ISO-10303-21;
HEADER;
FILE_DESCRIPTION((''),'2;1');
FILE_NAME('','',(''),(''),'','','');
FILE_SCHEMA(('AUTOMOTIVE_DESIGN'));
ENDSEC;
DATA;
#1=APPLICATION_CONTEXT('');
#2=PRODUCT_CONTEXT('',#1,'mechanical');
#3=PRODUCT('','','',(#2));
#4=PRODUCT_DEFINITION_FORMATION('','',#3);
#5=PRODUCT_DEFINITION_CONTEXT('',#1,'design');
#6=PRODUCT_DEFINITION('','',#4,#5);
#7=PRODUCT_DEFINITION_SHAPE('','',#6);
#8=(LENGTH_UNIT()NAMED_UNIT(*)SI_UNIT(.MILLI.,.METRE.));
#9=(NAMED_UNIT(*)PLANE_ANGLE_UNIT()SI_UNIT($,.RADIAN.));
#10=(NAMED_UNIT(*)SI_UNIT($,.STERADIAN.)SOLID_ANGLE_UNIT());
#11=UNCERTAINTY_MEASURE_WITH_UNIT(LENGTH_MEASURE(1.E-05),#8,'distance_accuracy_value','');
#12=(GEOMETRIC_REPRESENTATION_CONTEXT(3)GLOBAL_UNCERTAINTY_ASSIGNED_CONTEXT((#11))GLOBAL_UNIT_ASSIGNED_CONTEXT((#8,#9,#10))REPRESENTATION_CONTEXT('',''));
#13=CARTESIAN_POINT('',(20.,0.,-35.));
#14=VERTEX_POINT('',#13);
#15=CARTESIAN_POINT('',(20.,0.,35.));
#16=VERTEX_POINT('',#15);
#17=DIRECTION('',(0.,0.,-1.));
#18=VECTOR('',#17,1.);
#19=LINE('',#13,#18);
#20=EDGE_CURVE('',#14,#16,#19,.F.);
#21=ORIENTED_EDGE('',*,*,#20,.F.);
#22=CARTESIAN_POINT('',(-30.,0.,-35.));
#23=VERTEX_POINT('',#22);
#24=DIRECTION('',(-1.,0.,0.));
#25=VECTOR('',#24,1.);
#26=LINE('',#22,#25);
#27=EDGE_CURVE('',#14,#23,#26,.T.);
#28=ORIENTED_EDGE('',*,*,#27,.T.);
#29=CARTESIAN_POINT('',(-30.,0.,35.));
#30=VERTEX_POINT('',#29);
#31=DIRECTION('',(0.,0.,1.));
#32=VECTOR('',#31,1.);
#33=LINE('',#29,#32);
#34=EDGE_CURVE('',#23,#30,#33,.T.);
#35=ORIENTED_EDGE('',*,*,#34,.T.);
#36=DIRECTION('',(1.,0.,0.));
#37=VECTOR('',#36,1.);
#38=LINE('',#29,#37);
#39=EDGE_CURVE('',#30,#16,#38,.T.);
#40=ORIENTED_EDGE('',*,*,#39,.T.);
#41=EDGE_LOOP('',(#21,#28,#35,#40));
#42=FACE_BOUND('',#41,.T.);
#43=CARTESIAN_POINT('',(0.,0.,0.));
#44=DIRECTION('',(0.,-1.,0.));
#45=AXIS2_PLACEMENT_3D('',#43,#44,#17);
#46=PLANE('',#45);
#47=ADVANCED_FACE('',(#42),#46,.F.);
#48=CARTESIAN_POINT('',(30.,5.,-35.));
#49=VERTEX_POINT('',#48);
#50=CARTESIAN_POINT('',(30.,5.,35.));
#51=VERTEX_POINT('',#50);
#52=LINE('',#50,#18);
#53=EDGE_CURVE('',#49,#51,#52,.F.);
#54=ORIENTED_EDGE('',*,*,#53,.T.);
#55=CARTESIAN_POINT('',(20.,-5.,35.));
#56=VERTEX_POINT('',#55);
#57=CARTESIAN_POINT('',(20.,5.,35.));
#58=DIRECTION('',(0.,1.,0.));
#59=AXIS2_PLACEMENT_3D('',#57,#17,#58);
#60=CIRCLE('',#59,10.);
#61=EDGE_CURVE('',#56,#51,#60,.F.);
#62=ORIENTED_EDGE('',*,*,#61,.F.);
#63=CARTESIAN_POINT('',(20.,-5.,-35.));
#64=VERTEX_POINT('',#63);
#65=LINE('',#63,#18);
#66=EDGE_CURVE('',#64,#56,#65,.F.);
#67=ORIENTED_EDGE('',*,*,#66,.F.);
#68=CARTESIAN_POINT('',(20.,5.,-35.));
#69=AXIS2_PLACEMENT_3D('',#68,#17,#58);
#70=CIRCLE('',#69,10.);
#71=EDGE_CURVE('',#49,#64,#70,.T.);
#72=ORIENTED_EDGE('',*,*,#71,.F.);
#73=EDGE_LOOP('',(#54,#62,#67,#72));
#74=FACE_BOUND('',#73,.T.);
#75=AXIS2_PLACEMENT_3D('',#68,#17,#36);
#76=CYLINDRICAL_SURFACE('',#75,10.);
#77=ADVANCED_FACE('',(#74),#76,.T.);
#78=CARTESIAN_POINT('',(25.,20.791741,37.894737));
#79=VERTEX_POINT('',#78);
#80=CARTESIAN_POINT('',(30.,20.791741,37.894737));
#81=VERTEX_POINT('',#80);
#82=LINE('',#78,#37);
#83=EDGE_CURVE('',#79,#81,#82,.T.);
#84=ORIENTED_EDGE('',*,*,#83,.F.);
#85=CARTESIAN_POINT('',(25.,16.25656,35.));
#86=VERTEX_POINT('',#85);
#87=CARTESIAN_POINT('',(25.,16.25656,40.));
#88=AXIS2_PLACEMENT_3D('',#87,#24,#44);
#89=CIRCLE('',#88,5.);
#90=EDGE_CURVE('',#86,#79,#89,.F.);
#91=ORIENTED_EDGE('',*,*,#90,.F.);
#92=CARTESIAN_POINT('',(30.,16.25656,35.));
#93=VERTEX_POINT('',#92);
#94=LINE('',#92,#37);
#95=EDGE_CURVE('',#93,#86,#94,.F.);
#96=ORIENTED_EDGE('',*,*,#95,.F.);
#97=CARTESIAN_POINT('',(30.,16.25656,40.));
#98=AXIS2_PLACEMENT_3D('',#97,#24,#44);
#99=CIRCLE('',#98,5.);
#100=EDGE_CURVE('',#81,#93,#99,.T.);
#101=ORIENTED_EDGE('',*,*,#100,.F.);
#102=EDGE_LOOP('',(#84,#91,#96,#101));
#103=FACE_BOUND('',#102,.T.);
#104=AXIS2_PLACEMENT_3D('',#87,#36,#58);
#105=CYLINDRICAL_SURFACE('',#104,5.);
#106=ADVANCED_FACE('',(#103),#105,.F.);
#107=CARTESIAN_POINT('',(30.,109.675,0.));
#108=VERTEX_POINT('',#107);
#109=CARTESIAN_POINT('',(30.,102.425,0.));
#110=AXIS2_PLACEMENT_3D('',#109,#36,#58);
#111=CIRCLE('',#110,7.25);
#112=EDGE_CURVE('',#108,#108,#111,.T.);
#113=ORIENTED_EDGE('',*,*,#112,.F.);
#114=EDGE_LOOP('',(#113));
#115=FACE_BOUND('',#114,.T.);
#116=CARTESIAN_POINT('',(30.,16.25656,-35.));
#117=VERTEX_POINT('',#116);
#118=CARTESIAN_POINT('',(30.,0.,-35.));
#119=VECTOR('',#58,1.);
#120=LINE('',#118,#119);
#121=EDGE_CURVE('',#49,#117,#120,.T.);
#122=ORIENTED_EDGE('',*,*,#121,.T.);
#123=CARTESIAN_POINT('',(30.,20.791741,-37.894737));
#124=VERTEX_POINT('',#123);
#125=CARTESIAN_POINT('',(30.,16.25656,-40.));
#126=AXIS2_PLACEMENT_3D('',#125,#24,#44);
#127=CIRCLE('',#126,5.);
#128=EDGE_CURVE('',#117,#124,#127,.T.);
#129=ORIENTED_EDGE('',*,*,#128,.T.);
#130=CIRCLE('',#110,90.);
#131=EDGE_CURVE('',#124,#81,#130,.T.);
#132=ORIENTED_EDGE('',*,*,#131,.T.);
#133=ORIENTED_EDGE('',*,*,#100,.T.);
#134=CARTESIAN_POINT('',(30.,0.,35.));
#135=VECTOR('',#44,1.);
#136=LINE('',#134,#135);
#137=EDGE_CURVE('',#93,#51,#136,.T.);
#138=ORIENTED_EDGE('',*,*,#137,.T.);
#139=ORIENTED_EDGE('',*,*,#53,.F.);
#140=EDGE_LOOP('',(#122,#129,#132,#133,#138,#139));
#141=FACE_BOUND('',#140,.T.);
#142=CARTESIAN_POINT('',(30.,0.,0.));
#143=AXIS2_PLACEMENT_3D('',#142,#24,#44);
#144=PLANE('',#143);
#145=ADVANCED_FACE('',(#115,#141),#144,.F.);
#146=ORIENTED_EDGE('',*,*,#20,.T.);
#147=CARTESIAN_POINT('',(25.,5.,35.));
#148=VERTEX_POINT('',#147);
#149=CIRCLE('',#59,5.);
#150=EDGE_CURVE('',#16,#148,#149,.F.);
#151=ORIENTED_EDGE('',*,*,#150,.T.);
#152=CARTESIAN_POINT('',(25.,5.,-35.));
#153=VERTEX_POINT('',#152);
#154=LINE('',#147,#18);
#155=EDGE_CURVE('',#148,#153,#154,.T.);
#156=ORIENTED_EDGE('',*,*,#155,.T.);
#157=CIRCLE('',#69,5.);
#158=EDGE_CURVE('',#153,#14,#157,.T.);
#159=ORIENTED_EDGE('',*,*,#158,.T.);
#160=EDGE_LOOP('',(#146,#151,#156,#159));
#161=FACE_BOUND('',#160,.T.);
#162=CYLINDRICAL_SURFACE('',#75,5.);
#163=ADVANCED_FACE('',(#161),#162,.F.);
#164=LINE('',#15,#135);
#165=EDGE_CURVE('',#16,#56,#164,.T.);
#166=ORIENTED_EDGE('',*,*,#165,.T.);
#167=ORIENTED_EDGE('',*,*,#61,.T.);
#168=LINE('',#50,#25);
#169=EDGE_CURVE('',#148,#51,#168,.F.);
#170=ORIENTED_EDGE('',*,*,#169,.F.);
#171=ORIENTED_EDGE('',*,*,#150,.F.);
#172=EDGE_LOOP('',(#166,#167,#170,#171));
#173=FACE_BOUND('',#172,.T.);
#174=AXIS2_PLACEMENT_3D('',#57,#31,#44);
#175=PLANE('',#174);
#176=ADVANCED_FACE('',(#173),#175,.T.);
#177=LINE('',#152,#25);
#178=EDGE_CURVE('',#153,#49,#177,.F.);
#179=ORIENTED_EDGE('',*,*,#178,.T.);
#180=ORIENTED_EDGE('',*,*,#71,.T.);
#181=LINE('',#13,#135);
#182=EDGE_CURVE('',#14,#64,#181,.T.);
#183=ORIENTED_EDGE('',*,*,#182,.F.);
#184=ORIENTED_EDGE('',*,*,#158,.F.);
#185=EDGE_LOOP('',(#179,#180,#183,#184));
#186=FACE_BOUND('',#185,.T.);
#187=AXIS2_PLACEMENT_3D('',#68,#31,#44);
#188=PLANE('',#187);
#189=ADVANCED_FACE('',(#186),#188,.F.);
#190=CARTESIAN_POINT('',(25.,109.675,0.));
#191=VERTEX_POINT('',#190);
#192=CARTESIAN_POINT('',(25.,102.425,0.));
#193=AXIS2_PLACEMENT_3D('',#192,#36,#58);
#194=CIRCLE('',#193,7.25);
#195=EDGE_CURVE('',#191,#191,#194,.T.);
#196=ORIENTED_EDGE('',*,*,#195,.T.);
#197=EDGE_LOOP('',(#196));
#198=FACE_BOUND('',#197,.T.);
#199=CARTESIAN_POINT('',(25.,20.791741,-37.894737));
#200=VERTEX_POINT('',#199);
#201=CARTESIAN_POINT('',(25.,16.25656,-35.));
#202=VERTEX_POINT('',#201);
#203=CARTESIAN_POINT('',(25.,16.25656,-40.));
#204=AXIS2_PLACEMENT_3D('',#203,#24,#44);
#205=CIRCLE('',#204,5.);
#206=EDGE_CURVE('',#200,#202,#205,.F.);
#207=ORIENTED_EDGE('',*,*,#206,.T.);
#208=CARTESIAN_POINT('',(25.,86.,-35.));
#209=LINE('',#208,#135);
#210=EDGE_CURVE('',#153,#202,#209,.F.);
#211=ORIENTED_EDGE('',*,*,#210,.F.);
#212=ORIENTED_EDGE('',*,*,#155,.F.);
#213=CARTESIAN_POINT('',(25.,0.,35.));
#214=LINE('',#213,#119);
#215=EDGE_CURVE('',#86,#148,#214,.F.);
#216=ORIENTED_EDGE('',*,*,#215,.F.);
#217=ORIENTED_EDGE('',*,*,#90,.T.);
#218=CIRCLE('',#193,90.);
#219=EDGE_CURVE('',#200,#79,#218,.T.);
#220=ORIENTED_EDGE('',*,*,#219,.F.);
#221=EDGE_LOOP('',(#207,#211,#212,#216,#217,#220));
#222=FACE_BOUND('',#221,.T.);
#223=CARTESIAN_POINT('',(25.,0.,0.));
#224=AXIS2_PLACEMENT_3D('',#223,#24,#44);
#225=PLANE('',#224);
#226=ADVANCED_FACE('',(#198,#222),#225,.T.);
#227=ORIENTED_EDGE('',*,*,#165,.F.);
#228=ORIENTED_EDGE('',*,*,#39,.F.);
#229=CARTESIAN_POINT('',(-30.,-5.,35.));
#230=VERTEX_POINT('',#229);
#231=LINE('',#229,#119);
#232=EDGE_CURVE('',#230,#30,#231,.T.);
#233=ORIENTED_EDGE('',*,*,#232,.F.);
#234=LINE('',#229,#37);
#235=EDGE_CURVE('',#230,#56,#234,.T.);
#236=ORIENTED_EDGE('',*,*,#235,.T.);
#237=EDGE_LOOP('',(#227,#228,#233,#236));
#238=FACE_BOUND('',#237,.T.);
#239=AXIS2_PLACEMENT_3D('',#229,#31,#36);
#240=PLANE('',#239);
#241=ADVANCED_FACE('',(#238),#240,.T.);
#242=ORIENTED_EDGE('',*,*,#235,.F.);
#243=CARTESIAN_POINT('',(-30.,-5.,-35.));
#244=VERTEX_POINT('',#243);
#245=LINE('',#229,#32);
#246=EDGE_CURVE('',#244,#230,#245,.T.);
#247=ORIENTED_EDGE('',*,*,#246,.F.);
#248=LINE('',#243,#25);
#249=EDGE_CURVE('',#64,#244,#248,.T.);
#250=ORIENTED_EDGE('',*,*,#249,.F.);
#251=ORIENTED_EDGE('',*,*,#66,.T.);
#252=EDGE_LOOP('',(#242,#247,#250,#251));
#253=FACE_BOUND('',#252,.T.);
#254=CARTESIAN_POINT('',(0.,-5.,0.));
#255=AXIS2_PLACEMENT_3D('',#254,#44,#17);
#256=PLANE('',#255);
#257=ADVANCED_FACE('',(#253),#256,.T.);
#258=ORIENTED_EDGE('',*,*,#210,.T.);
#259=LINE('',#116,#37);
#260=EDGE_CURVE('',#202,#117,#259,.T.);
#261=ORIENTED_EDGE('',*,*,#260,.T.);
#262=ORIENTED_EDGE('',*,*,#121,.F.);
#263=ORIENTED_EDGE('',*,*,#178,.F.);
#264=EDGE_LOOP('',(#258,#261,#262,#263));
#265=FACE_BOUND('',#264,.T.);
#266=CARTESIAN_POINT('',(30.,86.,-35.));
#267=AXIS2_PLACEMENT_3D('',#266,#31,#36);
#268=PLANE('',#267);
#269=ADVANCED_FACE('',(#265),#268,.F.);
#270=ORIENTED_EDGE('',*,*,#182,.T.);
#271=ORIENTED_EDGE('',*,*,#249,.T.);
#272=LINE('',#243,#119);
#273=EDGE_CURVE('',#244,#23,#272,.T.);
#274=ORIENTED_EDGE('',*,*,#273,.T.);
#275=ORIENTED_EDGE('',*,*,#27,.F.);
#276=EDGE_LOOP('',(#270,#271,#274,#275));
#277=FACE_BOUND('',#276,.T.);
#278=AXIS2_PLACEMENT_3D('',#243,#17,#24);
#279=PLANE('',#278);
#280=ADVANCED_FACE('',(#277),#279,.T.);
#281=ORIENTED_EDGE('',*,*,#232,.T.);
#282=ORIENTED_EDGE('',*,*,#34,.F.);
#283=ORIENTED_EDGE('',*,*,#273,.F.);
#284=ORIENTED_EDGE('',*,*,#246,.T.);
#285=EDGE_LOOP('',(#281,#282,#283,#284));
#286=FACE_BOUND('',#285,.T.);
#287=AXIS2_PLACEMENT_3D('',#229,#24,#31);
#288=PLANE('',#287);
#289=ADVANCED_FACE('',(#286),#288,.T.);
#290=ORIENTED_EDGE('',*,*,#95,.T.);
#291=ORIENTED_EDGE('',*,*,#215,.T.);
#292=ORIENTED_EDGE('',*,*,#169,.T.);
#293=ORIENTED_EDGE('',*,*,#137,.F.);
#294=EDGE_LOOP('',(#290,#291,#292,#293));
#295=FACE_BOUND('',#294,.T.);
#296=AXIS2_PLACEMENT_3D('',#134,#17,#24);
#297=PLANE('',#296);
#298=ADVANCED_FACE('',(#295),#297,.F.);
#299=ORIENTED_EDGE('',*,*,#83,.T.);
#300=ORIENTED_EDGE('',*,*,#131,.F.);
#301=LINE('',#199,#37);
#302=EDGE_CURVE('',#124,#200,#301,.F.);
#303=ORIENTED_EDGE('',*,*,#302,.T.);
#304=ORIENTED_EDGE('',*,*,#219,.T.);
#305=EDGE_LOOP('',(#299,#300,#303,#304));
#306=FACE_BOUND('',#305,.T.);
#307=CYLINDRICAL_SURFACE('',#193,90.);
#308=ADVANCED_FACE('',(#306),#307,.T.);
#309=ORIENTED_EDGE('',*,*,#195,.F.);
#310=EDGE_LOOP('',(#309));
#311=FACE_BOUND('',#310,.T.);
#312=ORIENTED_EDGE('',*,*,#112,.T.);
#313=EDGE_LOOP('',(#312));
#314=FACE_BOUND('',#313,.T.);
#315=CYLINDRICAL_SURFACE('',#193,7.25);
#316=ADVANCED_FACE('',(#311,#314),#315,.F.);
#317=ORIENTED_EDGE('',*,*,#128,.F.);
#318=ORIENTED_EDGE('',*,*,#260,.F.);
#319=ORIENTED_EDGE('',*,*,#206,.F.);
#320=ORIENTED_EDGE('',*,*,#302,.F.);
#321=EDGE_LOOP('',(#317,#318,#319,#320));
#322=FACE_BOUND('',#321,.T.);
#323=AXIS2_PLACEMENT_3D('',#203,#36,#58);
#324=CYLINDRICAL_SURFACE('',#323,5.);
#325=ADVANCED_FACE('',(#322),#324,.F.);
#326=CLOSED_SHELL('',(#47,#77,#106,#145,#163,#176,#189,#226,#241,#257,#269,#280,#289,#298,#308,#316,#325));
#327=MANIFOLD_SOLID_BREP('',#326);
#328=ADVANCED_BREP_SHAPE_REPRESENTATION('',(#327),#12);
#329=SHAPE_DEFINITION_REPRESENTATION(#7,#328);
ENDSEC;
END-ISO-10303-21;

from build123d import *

# Parameters (mm, degrees)
ESBO_O1_W                      = 60
ESBO_O1_H                      = 70
FLANGE_BASE1_DEPTH             = 5
ARESTA_FLANGE1_STRIP_W         = 30
ARESTA_FLANGE1_STRIP_H         = 5
ARESTA_FLANGE1_STRIP_CUT_DEPTH = 70
ARESTA_FLANGE1_DEPTH           = 70
ESBO_O9_R                      = 90
ABA1_DEPTH                     = 5
FILETE5_R                      = 5
FILETE6_R                      = 5
ESBO_O10_R                     = 7.25
CORTE_EXTRUS_O1_DEPTH          = 5


# Sheet-metal steps are written as plain solids
with BuildPart() as part:
    # Esboço1 → Flange-base1 (new body)
    with BuildSketch(Plane(origin=(0, 0, 0), x_dir=(1, 0, 0), z_dir=(0, 1, 0))):
        Rectangle(ESBO_O1_W, ESBO_O1_H)
    extrude(amount=-FLANGE_BASE1_DEPTH)

    # Aresta-Flange1 strip (across the edge) → Aresta-Flange1 strip cut (cut)
    with BuildSketch(Plane(origin=(30, 0, 35), x_dir=(-1, 0, 0), z_dir=(0, 0, -1))):
        with Locations((-5, -2.5)):
            Rectangle(ARESTA_FLANGE1_STRIP_W, ARESTA_FLANGE1_STRIP_H)
    extrude(amount=ARESTA_FLANGE1_STRIP_CUT_DEPTH, mode=Mode.SUBTRACT)

    # Aresta-Flange1 section (across the edge) → Aresta-Flange1 (add)
    with BuildSketch(Plane(origin=(30, 0, 35), x_dir=(-1, 0, 0), z_dir=(0, 0, -1))):
        with BuildLine():
            Line((0, 5), (0, 86))
            Line((0, 86), (5, 86))
            Line((5, 86), (5, 5))
            ThreePointArc((5, 5), (6.464466094, 1.464466094), (10, 0))
            Line((10, 0), (10, -5))
            ThreePointArc((10, -5), (2.928932188, -2.071067812), (0, 5))
        make_face()
    extrude(amount=ARESTA_FLANGE1_DEPTH)

    # Esboço9 → Aba1 (add)
    with BuildSketch(Plane(origin=(30, 0, 0), x_dir=(0, 0, -1), z_dir=(1, 0, 0))):
        with Locations((0, 102.425)):
            Circle(ESBO_O9_R)
    extrude(amount=-ABA1_DEPTH)

    # Filete5
    filete5_edges = [part.edges().sort_by_distance(p)[0] for p in [
        (27.5, 19.509380241, -35),
    ]]
    fillet(filete5_edges, radius=FILETE5_R)

    # Filete6
    filete6_edges = [part.edges().sort_by_distance(p)[0] for p in [
        (27.5, 19.509380241, 35),
    ]]
    fillet(filete6_edges, radius=FILETE6_R)

    # Esboço10 → Corte-extrusão1 (cut)
    with BuildSketch(Plane(origin=(30, 0, 0), x_dir=(0, 0, -1), z_dir=(1, 0, 0))):
        with Locations(Location((0, 102.425, 0), (0, 0, 90))):
            Circle(ESBO_O10_R)
    extrude(amount=-CORTE_EXTRUS_O1_DEPTH, mode=Mode.SUBTRACT)


solid = part.part
